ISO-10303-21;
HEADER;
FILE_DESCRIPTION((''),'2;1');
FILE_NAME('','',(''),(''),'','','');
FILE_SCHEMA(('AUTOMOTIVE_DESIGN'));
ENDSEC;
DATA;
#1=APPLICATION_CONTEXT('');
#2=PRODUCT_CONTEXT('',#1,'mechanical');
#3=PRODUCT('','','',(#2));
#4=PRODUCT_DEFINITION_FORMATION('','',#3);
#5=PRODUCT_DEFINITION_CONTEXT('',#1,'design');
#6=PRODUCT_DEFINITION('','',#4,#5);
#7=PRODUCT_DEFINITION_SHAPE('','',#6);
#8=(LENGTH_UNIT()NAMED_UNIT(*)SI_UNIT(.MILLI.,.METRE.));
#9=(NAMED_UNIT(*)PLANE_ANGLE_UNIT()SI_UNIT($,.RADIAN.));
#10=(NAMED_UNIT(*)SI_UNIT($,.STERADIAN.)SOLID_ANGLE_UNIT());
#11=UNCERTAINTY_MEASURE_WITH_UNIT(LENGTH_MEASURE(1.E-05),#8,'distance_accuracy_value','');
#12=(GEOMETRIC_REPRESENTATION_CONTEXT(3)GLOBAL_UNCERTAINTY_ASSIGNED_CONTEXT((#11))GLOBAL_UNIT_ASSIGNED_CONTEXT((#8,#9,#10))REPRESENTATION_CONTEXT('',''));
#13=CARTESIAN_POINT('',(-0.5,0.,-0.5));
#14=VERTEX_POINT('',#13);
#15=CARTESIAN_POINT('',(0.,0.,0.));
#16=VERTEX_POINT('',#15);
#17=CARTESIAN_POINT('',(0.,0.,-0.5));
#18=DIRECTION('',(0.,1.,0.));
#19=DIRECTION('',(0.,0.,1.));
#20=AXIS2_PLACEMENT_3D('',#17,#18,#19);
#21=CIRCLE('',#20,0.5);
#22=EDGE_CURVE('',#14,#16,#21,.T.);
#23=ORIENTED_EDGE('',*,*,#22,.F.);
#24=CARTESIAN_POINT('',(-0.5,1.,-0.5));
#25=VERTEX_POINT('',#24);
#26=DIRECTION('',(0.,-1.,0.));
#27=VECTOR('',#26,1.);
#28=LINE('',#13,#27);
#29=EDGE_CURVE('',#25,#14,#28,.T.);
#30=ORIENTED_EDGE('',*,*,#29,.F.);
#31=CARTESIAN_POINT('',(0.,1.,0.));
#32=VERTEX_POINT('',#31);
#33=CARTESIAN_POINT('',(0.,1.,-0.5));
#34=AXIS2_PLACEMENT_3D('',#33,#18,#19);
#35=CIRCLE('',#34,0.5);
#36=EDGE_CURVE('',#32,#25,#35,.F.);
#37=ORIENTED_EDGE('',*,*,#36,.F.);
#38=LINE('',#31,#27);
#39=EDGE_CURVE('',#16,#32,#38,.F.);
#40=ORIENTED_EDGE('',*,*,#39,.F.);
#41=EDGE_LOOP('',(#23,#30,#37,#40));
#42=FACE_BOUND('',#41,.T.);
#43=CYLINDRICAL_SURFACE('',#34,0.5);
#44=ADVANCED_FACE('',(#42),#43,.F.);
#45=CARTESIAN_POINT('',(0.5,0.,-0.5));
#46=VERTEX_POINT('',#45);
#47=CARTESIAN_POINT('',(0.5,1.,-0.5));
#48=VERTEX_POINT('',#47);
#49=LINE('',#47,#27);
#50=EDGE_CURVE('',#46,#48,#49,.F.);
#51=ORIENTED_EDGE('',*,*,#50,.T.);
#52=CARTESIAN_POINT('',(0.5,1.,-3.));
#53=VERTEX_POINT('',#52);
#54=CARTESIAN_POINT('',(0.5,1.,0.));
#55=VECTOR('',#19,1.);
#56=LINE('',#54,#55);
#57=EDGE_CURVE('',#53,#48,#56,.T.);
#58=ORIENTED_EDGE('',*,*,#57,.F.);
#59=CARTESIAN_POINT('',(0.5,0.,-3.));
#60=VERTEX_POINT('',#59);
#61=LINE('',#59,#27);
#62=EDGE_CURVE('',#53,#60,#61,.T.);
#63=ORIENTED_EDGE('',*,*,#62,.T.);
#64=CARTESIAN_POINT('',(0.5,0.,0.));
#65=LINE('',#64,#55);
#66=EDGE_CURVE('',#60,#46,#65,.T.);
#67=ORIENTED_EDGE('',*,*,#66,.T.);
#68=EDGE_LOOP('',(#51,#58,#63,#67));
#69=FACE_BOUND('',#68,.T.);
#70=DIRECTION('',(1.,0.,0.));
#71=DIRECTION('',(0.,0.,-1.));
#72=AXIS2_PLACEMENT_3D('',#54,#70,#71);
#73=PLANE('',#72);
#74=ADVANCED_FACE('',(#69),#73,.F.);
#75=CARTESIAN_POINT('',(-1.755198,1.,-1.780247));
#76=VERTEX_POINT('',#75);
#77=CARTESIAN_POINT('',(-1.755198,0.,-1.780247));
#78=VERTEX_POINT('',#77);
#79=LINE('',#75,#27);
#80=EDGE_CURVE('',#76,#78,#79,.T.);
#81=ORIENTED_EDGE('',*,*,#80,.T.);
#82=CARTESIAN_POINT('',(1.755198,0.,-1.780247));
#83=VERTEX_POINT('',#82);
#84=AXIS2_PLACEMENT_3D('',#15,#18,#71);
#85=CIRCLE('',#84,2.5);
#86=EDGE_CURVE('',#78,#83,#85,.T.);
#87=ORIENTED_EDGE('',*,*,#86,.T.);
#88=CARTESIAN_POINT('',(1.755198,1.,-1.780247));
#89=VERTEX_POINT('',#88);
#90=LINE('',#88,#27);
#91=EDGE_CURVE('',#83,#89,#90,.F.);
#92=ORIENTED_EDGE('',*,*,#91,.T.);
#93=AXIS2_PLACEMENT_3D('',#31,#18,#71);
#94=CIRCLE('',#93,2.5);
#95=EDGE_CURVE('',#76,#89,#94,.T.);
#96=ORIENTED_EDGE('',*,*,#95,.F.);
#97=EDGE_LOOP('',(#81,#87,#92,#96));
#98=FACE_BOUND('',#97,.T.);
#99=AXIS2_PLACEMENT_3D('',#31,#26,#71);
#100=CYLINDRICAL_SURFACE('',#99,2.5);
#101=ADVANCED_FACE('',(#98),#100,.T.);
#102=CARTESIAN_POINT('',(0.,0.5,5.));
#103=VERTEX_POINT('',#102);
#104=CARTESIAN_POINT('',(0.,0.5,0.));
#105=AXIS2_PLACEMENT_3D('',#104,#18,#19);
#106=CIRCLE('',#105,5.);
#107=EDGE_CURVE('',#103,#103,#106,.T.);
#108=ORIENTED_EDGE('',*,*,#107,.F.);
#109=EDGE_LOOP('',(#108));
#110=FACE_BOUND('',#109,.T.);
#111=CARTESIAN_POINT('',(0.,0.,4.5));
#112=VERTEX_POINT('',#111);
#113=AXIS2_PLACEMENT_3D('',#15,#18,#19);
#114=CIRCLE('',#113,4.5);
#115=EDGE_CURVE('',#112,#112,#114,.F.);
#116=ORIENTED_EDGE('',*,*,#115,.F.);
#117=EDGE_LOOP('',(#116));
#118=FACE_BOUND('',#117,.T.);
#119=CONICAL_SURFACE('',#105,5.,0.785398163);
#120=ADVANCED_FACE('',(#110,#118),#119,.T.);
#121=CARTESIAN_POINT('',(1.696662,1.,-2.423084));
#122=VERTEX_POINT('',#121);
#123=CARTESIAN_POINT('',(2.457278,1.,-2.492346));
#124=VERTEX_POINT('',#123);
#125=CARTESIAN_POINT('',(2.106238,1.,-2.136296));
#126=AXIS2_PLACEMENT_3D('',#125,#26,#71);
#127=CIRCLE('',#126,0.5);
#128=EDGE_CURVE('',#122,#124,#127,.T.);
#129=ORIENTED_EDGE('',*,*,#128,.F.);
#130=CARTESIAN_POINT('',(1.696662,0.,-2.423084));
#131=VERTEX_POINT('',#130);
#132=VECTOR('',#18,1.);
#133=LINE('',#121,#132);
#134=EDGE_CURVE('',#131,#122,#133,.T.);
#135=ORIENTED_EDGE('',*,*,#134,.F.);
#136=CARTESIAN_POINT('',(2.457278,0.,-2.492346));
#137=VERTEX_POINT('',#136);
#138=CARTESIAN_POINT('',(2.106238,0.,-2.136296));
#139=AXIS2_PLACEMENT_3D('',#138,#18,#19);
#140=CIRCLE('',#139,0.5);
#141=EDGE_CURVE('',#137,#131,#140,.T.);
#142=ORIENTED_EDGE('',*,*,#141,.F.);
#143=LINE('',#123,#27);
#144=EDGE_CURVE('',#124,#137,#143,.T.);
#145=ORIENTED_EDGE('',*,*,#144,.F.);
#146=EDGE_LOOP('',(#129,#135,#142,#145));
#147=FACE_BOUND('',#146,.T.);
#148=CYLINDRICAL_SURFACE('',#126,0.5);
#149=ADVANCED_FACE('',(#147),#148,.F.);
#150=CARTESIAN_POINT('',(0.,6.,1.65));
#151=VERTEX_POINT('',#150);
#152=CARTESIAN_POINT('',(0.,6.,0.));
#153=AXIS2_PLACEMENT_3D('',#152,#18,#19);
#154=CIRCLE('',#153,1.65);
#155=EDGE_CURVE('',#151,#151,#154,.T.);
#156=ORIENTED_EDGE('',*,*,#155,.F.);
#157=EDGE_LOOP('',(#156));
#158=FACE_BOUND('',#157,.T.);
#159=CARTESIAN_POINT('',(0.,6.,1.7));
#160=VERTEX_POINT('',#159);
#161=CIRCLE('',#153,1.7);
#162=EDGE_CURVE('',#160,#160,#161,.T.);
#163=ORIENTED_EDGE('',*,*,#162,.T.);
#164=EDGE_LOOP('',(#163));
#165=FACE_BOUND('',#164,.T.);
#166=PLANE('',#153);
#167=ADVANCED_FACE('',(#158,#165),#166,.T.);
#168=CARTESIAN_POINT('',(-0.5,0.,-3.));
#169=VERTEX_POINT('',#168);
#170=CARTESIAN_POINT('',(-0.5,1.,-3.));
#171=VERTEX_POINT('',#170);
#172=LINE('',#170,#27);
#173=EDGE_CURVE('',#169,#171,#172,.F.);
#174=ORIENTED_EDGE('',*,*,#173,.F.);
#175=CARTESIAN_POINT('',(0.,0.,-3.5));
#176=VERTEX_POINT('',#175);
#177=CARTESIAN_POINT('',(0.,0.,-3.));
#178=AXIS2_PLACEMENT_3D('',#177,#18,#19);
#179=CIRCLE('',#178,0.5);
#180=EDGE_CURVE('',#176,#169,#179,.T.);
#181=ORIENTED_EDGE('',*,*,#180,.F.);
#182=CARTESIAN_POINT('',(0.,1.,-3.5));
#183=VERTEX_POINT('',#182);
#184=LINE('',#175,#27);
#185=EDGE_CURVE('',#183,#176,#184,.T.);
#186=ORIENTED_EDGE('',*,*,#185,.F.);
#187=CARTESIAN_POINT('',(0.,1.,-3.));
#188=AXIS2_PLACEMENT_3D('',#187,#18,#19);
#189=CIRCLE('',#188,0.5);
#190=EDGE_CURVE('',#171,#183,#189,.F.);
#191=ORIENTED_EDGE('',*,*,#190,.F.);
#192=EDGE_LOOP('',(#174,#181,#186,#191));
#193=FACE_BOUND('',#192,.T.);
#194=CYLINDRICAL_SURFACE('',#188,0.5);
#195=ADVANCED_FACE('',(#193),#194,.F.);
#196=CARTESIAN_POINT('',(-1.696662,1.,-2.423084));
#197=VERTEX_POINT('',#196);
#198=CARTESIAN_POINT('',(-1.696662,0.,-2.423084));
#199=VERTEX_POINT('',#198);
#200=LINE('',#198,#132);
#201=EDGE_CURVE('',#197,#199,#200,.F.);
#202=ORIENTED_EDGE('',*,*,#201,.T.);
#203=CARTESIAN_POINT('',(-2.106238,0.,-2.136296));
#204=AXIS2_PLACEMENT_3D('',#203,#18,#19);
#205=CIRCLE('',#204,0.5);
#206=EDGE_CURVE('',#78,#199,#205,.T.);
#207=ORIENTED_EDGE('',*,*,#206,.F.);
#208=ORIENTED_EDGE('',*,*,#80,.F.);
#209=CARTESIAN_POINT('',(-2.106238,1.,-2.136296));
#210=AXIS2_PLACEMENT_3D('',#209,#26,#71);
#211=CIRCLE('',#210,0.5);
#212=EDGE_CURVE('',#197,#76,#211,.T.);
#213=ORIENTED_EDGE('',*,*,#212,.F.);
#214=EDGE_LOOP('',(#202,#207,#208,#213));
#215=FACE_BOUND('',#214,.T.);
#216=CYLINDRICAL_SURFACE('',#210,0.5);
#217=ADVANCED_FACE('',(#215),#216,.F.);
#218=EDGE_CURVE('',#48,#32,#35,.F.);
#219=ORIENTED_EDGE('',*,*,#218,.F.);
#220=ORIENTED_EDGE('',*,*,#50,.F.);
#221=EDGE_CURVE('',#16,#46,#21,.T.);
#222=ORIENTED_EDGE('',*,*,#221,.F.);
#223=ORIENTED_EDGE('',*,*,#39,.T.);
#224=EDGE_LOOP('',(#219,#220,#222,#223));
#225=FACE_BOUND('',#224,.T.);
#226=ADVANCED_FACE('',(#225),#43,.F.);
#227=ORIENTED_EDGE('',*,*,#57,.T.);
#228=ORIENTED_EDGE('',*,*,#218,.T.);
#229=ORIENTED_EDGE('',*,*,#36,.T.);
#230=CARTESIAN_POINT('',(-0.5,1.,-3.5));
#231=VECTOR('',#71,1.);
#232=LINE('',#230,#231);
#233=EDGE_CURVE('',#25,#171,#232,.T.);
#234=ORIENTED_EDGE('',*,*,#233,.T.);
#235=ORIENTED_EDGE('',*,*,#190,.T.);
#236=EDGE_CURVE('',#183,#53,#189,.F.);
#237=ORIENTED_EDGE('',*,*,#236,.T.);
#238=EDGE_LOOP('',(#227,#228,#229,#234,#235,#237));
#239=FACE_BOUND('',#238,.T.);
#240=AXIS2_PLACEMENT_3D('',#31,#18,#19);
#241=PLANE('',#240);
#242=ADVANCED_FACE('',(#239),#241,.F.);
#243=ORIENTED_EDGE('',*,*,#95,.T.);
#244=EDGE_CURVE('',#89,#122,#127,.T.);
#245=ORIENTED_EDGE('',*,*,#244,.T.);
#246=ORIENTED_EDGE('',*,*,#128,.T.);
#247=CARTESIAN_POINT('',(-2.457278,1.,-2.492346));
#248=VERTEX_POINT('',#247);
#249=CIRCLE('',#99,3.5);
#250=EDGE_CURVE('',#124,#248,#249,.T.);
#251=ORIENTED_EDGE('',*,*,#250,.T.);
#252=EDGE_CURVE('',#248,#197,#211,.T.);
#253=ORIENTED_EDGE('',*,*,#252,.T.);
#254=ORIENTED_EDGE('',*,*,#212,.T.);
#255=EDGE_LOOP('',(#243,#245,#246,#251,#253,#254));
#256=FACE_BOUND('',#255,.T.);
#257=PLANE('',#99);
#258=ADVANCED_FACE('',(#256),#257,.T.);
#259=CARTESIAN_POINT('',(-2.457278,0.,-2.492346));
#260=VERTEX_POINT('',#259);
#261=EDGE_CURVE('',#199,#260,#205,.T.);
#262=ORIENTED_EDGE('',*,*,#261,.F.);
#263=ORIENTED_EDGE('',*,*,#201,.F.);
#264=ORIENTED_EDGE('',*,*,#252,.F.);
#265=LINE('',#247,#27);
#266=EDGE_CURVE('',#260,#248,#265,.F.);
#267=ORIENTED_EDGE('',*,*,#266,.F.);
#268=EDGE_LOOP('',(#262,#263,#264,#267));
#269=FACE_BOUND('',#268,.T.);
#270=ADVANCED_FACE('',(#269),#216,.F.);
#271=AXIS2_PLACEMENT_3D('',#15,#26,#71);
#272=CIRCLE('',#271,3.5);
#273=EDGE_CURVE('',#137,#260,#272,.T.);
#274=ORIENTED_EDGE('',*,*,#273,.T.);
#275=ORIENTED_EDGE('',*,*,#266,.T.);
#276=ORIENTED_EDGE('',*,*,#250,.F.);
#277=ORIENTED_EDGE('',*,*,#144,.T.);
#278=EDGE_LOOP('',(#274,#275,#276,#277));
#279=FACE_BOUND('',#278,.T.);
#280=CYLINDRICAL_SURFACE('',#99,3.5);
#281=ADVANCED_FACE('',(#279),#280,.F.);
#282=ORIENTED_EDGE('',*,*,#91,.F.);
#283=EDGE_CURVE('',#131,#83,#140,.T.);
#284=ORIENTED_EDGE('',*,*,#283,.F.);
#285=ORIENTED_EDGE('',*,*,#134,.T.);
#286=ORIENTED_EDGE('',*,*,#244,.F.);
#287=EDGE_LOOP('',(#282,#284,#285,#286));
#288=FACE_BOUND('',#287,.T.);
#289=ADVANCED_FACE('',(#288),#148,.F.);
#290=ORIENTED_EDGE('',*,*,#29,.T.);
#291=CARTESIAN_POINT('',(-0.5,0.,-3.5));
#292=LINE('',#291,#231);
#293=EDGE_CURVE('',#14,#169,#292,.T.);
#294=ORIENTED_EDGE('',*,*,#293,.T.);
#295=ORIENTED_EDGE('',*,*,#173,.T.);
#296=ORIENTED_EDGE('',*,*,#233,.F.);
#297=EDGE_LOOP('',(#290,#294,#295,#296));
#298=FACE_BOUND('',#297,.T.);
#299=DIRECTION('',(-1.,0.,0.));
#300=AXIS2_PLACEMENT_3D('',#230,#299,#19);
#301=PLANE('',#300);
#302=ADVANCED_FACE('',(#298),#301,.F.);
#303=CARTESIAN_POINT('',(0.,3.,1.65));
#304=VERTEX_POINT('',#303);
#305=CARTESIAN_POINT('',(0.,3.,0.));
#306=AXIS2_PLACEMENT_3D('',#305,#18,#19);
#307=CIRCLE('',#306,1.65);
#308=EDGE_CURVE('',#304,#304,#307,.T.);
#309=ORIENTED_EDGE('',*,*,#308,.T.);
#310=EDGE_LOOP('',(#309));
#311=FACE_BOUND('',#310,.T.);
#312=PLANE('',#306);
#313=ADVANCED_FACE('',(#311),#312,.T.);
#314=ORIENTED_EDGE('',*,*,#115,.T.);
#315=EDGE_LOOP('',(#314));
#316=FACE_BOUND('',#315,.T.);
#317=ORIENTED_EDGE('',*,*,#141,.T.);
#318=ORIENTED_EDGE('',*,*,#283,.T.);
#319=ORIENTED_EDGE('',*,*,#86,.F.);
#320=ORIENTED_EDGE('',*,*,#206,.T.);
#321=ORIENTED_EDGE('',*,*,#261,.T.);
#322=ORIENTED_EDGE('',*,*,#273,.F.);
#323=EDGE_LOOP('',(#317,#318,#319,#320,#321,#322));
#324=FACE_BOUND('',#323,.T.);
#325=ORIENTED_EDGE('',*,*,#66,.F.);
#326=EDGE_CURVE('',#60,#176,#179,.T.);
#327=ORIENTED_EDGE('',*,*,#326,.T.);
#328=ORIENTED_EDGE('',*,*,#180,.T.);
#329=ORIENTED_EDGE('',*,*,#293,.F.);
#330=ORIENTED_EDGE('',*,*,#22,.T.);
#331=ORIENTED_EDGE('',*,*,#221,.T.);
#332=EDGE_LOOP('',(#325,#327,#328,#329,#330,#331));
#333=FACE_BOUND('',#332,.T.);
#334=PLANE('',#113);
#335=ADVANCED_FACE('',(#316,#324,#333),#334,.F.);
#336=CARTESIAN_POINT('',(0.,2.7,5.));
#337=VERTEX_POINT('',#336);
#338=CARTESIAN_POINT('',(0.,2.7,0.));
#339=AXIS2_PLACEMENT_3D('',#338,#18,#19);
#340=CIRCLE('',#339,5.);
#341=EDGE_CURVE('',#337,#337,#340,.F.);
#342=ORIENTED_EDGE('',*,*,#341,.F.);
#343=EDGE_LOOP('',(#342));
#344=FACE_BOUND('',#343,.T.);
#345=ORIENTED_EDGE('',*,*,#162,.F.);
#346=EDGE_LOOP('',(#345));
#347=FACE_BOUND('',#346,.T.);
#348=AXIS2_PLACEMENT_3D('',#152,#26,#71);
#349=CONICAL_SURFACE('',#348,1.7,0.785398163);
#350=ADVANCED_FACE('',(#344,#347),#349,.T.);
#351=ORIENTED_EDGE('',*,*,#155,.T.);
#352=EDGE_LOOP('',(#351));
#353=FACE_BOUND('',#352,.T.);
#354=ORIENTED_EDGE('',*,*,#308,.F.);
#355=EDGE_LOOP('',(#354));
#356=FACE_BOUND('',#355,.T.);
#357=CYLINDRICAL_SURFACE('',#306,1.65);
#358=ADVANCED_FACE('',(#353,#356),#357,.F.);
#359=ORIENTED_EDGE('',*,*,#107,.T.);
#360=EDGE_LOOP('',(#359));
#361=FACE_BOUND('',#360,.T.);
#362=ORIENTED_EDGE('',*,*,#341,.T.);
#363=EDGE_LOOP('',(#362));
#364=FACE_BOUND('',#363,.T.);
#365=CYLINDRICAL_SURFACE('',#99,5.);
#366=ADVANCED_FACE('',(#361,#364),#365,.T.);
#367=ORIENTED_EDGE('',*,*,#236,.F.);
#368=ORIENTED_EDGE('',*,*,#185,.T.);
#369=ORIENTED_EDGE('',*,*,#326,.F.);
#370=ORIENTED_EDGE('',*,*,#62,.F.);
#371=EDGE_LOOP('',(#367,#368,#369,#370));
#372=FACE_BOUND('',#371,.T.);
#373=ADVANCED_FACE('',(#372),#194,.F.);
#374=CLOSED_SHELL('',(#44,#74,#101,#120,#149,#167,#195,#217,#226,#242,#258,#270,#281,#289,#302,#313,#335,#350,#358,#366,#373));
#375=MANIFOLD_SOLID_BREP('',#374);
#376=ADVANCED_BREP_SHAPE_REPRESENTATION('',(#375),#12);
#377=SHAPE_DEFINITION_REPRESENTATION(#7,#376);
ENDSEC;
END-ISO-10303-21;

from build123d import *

# Parameters (mm, degrees)
SKETCH1_R           = 5
BOSS_EXTRUDE1_DEPTH = 1
SKETCH2_R           = 5
BOSS_EXTRUDE2_DEPTH = 5
SKETCH3_R           = 1.65
CUT_EXTRUDE3_DEPTH  = 3
CHAMFER3_SIZE       = 3.3
CHAMFER4_SIZE       = 0.5
SKETCH4_W           = 1
SKETCH4_H           = 3.5
CUT_EXTRUDE4_DEPTH  = 1
FILLET1_R           = 0.5


with BuildPart() as part:
    # Sketch1 → Boss-Extrude1 (new body)
    with BuildSketch(Plane(origin=(0, 0, 0), x_dir=(1, 0, 0), z_dir=(0, 1, 0))):
        with Locations(Location((0, 0, 0), (0, 0, 270))):
            Circle(SKETCH1_R)
    extrude(amount=BOSS_EXTRUDE1_DEPTH)

    # Sketch2 → Boss-Extrude2 (add)
    with BuildSketch(Plane(origin=(0, 1, 0), x_dir=(1, 0, 0), z_dir=(0, 1, 0))):
        with Locations(Location((0, 0, 0), (0, 0, 270))):
            Circle(SKETCH2_R)
    extrude(amount=BOSS_EXTRUDE2_DEPTH)

    # Sketch3 → Cut-Extrude3 (cut)
    with BuildSketch(Plane(origin=(0, 6, 0), x_dir=(1, 0, 0), z_dir=(0, 1, 0))):
        with Locations(Location((0, 0, 0), (0, 0, 270))):
            Circle(SKETCH3_R)
    extrude(amount=-CUT_EXTRUDE3_DEPTH, mode=Mode.SUBTRACT)

    # Chamfer3
    chamfer3_edges = [part.edges().sort_by_distance(p)[0] for p in [
        (0, 6, -5),
    ]]
    chamfer(chamfer3_edges, length=CHAMFER3_SIZE)

    # Chamfer4
    chamfer4_edges = [part.edges().sort_by_distance(p)[0] for p in [
        (0, 0, -5),
    ]]
    chamfer(chamfer4_edges, length=CHAMFER4_SIZE)

    # Sketch4 → Cut-Extrude4 (cut)
    with BuildSketch(Plane.XZ):
        with BuildLine():
            Line((-2.007517527, -2.867032155), (-1.433941091, -2.047880111))
            ThreePointArc((-1.433941091, -2.047880111), (0, 2.5), (1.433941091, -2.047880111))
            Line((1.433941091, -2.047880111), (2.007517527, -2.867032155))
            ThreePointArc((2.007517527, -2.867032155), (0, 3.5), (-2.007517527, -2.867032155))
        make_face()
        with Locations((0, -1.75)):
            Rectangle(SKETCH4_W, SKETCH4_H)
    extrude(amount=-CUT_EXTRUDE4_DEPTH, mode=Mode.SUBTRACT)

    # Fillet1
    fillet1_edges = [part.edges().sort_by_distance(p)[0] for p in [
        (1.433941091, 0.5, -2.047880111),
        (2.007517527, 0.5, -2.867032155),
        (0.5, 0.5, -3.5),
        (0.5, 0.5, 0),
        (-0.5, 0.5, 0),
        (-0.5, 0.5, -3.5),
        (-1.433941091, 0.5, -2.047880111),
        (-2.007517527, 0.5, -2.867032155),
    ]]
    fillet(fillet1_edges, radius=FILLET1_R - 0.0001)  # a hair under: the kernel refuses the full size


solid = part.part
